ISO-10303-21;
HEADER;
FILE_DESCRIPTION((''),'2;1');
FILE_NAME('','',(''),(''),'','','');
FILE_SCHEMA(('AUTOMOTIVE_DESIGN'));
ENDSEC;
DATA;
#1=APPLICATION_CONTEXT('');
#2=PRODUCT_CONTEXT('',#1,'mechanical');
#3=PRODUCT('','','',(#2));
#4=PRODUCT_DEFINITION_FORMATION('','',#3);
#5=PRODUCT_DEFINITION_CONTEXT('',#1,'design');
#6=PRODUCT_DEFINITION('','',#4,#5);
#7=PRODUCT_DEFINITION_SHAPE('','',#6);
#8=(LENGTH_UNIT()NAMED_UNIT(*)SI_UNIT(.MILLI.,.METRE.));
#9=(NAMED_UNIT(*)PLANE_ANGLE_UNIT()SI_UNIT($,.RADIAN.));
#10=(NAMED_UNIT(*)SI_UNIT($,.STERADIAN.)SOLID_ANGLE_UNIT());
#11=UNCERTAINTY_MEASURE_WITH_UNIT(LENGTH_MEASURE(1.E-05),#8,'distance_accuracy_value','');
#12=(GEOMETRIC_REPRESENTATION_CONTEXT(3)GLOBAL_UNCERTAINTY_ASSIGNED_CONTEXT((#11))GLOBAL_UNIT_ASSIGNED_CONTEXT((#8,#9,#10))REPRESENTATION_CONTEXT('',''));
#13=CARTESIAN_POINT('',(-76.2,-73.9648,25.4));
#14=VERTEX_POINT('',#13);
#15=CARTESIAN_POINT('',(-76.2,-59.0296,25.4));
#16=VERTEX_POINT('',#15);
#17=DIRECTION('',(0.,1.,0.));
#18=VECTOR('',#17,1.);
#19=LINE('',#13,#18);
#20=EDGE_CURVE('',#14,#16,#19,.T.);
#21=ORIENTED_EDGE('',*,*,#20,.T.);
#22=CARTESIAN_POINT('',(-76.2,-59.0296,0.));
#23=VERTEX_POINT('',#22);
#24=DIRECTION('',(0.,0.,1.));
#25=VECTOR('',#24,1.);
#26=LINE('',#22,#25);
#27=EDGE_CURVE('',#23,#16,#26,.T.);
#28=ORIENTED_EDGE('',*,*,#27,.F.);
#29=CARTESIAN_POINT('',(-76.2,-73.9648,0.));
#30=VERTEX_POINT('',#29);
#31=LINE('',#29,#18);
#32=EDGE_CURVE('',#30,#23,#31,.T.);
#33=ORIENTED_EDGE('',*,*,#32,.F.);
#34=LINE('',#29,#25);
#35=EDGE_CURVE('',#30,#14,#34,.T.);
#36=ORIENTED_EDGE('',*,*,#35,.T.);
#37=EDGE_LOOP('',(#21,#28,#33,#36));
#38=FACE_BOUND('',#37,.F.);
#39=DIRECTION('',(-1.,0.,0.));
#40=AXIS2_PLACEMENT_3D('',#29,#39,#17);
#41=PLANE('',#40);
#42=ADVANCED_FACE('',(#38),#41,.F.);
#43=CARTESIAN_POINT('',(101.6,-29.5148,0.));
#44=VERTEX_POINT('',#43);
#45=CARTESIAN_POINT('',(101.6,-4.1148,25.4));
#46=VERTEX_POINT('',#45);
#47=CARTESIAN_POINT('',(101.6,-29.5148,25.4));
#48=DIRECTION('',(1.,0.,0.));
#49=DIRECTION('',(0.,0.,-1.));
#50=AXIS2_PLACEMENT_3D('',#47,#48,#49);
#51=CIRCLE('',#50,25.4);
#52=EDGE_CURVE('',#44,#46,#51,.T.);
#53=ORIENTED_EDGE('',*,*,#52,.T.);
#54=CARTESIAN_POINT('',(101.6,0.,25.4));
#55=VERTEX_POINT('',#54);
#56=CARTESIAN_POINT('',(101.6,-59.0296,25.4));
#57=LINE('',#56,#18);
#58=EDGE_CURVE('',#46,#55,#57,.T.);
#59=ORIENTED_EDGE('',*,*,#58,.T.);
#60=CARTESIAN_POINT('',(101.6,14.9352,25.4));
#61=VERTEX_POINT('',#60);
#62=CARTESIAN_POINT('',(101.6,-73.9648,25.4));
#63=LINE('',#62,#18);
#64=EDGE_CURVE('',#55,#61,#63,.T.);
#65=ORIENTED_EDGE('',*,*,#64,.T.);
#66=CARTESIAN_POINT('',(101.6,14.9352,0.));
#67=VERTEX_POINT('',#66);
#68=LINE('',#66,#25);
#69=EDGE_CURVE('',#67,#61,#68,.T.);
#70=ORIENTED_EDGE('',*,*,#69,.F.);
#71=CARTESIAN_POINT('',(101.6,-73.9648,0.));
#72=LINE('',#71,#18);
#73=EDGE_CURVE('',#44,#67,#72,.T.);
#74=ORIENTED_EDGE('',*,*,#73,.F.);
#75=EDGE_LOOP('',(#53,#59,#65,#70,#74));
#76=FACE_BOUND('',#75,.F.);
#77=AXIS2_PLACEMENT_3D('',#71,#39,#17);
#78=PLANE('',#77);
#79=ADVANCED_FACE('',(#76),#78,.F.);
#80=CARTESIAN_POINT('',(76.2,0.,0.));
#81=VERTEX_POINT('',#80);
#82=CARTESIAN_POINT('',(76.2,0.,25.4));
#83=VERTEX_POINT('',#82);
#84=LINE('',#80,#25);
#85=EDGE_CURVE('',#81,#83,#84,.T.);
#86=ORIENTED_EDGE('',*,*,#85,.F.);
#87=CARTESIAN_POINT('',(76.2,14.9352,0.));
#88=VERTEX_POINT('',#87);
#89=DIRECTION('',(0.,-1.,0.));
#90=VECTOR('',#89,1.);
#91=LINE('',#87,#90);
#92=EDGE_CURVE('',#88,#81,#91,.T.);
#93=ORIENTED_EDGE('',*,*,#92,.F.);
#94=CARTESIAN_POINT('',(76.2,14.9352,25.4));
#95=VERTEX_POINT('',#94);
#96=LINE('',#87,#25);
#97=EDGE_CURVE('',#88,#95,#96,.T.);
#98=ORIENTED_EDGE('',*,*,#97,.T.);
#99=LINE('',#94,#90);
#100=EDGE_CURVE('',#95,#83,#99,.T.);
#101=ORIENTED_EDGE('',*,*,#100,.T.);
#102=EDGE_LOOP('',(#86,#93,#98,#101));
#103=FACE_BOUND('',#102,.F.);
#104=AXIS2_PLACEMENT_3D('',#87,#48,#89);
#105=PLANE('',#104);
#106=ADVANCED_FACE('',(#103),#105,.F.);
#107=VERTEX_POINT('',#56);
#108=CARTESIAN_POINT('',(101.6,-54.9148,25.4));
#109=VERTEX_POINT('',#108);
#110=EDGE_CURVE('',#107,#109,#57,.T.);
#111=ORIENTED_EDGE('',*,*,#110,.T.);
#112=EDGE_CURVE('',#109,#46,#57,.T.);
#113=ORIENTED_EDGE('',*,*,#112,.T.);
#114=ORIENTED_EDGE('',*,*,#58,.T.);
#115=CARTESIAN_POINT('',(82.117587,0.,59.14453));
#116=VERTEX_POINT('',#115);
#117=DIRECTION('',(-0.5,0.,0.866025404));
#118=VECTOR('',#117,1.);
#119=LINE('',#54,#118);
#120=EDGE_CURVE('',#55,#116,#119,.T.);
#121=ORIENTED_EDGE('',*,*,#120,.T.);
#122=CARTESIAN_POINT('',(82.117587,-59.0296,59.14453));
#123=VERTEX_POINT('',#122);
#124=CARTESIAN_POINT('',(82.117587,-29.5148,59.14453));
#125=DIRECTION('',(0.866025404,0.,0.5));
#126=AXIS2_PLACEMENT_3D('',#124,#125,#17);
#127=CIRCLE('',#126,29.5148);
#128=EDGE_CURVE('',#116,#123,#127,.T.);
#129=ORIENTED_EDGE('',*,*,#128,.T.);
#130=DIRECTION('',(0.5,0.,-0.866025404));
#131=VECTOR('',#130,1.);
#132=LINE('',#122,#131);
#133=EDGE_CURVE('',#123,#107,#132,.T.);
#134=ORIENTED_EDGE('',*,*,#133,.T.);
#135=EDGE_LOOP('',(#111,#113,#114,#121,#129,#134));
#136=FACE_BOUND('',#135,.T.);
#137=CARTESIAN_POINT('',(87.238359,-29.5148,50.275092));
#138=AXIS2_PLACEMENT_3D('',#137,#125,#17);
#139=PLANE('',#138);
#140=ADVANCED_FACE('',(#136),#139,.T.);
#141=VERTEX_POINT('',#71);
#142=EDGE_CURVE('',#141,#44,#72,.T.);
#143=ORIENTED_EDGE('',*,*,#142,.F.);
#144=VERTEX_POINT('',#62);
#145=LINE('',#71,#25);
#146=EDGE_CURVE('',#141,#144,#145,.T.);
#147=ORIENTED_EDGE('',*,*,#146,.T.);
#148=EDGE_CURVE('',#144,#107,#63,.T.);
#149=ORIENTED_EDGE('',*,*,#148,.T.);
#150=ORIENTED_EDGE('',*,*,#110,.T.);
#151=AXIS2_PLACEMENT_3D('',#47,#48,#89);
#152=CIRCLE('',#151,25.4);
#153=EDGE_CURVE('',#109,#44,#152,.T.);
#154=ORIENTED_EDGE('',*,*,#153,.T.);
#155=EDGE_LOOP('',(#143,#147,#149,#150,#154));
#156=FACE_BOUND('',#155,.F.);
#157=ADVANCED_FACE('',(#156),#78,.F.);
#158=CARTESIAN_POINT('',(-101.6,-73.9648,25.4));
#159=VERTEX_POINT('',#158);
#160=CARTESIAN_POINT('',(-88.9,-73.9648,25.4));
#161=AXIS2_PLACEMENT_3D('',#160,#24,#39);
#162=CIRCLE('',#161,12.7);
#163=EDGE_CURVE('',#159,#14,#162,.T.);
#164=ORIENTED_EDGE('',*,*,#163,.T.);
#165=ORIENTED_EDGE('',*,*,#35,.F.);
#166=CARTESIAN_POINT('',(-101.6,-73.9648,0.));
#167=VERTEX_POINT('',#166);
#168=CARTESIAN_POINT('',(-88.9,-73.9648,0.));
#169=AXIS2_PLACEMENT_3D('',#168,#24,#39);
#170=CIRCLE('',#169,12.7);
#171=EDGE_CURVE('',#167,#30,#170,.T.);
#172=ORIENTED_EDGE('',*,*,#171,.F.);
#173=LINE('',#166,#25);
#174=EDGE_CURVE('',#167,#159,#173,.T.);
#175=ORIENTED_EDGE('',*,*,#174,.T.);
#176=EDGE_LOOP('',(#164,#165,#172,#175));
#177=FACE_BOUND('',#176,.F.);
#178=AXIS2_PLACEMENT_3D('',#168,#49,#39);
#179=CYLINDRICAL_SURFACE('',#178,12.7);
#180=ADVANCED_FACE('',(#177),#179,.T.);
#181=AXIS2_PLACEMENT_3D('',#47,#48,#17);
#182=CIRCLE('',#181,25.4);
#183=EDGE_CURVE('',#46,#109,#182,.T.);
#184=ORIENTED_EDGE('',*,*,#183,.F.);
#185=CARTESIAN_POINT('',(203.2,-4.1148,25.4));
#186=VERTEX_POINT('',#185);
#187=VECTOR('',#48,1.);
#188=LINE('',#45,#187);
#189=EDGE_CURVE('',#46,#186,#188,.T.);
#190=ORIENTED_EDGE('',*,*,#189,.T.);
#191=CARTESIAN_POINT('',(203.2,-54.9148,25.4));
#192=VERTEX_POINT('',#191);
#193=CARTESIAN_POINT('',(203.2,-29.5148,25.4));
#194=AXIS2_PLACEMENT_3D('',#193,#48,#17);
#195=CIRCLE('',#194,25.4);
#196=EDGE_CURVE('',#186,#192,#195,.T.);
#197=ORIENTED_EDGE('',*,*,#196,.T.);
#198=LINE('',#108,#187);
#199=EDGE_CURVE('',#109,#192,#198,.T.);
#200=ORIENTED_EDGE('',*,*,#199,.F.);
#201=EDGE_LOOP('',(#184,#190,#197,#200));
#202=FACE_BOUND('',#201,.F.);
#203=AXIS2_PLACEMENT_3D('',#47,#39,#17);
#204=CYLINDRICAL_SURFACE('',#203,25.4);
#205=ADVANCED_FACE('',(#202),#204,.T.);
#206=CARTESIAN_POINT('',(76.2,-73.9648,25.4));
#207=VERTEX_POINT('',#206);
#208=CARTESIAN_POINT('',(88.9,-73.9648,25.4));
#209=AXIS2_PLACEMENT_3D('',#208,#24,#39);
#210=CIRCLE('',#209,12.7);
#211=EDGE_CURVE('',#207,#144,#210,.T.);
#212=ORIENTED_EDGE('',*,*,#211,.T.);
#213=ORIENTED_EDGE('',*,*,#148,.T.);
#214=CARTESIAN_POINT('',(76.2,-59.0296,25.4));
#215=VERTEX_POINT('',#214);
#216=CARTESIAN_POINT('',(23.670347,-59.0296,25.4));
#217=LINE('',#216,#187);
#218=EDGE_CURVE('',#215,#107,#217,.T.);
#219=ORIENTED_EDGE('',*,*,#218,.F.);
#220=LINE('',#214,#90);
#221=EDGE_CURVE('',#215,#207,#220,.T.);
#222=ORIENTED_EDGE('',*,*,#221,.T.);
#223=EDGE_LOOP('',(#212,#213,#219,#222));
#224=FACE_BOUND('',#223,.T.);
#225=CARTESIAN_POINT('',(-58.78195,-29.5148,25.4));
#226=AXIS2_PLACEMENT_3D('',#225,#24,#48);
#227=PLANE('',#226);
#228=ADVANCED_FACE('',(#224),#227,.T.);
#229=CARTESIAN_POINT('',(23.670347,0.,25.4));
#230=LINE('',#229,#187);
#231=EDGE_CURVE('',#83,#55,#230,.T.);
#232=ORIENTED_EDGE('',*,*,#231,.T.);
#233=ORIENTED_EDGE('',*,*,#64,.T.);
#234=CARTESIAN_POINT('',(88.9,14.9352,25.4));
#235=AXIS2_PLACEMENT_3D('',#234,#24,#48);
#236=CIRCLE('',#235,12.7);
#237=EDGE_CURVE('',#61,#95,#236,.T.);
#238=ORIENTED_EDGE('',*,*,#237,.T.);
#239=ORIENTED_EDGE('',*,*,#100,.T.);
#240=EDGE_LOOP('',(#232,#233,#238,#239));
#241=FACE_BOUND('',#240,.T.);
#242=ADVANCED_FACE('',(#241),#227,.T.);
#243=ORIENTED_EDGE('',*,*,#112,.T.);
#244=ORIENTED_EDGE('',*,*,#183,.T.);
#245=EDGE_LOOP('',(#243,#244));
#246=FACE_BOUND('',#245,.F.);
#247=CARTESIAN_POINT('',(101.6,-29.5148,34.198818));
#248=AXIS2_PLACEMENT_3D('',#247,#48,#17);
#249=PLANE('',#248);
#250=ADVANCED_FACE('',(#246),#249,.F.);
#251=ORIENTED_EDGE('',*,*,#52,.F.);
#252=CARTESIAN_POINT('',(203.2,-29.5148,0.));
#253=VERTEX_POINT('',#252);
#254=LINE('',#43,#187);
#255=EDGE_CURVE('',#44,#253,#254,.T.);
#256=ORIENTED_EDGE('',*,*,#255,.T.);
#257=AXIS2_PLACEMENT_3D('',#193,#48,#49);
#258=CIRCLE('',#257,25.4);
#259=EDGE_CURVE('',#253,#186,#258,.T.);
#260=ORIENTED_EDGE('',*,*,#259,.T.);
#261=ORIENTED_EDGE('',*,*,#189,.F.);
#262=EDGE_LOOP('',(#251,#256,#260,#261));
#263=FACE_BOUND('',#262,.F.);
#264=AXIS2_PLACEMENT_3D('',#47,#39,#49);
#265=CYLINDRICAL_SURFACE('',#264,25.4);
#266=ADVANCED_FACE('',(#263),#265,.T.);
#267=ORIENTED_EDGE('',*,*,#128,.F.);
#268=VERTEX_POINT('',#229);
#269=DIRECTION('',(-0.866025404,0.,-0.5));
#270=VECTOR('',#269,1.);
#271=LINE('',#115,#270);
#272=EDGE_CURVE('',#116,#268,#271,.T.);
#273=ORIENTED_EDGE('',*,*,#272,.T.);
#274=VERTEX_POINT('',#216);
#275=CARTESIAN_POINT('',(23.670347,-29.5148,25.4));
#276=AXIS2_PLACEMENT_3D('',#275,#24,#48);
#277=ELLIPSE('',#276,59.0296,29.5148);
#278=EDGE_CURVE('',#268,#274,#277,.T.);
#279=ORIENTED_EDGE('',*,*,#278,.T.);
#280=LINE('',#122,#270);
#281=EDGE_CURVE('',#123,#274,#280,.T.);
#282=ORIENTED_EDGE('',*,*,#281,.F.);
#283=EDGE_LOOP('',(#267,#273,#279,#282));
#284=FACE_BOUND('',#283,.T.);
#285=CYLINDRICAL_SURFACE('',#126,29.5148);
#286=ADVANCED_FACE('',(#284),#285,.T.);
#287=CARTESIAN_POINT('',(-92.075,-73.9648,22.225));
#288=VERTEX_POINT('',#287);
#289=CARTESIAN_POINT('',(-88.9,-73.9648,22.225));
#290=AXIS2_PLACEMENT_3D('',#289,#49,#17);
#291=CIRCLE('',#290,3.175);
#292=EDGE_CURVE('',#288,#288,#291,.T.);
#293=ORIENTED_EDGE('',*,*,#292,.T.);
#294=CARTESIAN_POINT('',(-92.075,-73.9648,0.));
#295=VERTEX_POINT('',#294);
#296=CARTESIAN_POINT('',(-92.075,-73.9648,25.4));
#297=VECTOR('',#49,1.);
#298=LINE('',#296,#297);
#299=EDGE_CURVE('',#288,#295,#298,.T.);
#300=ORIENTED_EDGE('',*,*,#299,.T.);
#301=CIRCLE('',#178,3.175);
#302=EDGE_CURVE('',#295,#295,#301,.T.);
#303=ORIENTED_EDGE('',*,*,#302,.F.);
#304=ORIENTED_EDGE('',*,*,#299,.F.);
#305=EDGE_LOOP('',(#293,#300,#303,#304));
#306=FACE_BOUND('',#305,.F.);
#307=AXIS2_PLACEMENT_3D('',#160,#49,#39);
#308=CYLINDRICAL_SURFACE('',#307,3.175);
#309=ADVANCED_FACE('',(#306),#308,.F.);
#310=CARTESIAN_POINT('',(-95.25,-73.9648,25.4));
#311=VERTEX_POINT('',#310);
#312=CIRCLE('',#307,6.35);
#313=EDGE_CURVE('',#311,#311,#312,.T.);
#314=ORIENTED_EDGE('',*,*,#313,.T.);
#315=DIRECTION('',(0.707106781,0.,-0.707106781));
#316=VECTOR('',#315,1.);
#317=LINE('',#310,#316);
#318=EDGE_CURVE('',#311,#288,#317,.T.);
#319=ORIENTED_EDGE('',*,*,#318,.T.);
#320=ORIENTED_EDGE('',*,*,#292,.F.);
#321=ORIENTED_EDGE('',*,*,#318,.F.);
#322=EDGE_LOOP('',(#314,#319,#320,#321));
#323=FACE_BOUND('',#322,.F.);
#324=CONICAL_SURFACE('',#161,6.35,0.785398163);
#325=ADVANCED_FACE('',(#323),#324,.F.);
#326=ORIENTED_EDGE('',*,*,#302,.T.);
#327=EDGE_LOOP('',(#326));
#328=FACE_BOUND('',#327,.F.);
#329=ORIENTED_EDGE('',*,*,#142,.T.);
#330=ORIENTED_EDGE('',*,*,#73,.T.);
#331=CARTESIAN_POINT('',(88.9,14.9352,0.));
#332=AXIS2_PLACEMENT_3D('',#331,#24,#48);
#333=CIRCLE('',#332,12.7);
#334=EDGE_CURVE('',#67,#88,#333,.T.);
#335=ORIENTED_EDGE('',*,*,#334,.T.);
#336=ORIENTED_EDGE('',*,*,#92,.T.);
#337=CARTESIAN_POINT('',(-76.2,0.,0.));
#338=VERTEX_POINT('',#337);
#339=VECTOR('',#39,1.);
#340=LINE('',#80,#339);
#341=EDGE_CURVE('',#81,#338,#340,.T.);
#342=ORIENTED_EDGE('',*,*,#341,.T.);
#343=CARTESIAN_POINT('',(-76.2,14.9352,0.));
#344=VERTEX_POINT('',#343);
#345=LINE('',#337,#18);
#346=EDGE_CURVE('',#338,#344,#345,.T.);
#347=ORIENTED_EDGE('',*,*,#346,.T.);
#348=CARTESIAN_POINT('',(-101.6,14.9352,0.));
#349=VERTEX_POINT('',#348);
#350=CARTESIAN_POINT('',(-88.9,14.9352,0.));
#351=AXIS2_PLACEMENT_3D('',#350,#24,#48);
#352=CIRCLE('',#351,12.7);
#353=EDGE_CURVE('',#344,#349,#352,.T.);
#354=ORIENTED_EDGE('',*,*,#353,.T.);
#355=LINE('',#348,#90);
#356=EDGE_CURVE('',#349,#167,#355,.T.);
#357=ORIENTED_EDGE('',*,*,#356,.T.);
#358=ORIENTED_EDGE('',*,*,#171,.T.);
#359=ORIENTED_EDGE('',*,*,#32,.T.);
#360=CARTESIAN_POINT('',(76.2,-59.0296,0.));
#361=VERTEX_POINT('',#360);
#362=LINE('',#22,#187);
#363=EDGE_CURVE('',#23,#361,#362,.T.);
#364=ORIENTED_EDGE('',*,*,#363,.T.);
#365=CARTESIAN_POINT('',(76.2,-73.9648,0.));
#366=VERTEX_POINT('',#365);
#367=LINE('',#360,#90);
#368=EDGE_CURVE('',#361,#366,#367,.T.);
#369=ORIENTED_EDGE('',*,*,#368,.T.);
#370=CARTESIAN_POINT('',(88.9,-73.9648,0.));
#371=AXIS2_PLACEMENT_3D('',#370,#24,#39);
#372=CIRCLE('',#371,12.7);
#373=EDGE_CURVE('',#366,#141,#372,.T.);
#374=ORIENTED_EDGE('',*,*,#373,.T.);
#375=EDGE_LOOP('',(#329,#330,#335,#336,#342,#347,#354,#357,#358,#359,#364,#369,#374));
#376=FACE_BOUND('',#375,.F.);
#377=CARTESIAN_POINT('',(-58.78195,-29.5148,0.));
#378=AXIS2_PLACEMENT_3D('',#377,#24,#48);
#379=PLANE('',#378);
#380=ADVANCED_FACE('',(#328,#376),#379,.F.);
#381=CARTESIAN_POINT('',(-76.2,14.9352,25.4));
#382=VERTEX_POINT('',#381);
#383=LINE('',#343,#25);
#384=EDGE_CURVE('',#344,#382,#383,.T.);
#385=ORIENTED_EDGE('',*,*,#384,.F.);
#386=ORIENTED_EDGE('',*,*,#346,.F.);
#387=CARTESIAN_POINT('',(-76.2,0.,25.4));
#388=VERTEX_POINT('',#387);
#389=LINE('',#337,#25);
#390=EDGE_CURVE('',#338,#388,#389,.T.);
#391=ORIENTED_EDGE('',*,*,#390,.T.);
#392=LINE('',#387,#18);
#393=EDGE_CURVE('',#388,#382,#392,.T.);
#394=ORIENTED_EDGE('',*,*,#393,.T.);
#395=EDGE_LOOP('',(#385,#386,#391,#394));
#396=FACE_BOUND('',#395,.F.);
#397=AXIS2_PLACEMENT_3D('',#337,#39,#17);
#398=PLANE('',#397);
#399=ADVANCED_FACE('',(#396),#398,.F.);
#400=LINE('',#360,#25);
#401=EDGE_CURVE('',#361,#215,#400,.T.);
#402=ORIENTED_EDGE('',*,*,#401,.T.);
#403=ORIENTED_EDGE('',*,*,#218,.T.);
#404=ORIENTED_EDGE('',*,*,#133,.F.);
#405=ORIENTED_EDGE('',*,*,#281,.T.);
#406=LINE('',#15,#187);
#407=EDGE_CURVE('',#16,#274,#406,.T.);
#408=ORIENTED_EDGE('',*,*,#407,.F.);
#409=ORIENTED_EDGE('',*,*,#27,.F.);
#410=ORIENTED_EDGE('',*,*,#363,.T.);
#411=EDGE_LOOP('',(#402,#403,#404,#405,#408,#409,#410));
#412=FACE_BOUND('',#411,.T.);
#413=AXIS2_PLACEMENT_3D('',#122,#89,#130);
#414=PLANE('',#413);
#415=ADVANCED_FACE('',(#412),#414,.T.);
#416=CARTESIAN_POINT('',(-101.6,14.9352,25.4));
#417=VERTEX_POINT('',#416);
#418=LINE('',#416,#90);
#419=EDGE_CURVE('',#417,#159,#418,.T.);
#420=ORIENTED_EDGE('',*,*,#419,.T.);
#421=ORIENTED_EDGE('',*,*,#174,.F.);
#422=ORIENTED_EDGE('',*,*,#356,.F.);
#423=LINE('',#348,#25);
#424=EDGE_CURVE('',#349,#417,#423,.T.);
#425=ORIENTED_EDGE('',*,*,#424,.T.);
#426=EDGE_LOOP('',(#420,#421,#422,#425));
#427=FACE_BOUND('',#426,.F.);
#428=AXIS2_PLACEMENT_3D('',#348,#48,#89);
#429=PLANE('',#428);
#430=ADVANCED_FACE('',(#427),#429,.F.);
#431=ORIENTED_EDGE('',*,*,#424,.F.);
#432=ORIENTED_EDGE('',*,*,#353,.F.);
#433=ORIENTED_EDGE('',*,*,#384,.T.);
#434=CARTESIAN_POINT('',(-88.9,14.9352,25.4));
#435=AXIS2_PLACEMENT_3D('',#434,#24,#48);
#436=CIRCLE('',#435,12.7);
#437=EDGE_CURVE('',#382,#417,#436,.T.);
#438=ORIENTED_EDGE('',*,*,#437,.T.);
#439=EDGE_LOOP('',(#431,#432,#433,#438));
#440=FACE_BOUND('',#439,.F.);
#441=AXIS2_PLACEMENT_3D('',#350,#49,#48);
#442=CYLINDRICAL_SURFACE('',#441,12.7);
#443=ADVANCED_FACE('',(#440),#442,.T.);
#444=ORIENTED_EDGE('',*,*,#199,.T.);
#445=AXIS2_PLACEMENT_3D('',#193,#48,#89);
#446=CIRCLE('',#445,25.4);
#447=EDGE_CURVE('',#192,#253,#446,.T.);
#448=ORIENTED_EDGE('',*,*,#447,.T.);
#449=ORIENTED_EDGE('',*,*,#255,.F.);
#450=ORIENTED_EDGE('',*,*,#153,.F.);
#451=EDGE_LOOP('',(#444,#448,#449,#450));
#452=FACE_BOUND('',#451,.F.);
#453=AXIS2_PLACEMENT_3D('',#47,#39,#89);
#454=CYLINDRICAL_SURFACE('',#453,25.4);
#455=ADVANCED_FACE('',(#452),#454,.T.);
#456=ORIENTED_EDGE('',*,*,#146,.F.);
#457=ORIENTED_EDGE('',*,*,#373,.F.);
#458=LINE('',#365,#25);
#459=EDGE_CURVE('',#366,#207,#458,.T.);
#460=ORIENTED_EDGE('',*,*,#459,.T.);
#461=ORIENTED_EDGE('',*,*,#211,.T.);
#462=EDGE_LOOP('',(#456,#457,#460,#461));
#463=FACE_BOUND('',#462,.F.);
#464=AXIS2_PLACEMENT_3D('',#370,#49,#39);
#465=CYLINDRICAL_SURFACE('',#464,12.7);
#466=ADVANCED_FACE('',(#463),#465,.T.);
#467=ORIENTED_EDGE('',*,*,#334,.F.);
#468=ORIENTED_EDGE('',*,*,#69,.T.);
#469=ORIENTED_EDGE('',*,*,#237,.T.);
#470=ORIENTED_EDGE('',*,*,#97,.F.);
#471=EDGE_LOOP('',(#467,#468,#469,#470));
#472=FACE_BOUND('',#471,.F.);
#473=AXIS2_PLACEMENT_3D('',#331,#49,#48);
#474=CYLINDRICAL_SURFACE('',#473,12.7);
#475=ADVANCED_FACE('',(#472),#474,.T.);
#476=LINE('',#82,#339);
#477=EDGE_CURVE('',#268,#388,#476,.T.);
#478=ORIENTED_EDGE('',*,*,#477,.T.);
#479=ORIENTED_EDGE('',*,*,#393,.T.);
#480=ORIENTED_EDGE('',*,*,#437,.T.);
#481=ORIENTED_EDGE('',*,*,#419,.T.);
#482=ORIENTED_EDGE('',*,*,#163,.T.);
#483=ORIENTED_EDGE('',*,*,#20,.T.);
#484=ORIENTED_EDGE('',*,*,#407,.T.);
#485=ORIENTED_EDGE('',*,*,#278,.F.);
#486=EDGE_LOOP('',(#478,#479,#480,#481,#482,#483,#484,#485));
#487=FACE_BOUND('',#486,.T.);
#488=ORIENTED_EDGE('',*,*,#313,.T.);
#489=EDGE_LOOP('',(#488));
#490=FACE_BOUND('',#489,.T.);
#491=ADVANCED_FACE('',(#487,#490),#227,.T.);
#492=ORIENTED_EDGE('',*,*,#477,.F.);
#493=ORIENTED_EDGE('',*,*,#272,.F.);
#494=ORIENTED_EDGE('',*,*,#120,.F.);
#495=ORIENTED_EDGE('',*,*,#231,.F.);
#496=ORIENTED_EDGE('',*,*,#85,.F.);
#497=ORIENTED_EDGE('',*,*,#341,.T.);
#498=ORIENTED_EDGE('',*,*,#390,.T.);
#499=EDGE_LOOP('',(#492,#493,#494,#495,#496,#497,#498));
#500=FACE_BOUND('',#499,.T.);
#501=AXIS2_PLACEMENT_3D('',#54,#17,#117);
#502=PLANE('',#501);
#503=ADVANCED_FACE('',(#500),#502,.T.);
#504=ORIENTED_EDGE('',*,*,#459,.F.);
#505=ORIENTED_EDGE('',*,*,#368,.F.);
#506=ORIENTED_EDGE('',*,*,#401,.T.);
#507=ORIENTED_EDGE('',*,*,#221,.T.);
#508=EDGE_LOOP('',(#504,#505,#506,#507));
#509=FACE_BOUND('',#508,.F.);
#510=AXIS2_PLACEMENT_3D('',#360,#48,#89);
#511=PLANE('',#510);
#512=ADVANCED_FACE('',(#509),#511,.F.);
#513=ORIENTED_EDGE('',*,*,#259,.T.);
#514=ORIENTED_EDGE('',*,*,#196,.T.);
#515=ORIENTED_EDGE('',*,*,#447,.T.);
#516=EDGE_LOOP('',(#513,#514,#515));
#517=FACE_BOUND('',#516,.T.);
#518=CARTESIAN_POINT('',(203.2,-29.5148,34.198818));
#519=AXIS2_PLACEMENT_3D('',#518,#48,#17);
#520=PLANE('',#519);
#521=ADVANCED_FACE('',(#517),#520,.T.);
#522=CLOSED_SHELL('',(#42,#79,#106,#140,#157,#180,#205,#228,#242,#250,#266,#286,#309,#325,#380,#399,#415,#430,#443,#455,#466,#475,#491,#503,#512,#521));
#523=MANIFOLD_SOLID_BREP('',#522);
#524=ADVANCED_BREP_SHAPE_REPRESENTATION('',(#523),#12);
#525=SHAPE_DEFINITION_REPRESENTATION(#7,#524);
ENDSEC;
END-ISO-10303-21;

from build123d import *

# Parameters (mm, degrees)
F1_DEPTH        = 25.4
F6_DEPTH        = 101.6
F10_D           = 6.35
F10_CSINK_D     = 12.7
F10_CSINK_ANGLE = 90


with BuildPart() as f1:
    # F0 (on Top) → F1 (new body)
    with BuildSketch(Plane.XY):
        with BuildLine():
            Line((0, -59.0296), (0, 0))
            Line((0, 0), (-76.2, 0))
            Line((-76.2, 0), (-76.2, 14.9352))
            ThreePointArc((-76.2, 14.9352), (-88.9, 27.6352), (-101.6, 14.9352))
            Line((-101.6, 14.9352), (-101.6, -73.9648))
            ThreePointArc((-101.6, -73.9648), (-88.9, -86.6648), (-76.2, -73.9648))
            Line((-76.2, -73.9648), (-76.2, -59.0296))
            Line((-76.2, -59.0296), (0, -59.0296))
        make_face()
        with BuildLine():
            Line((76.2, 0), (0, 0))
            Line((0, 0), (0, -59.0296))
            Line((0, -59.0296), (76.2, -59.0296))
            Line((76.2, -59.0296), (76.2, -73.9648))
            ThreePointArc((76.2, -73.9648), (88.9, -86.6648), (101.6, -73.9648))
            Line((101.6, -73.9648), (101.6, 14.9352))
            ThreePointArc((101.6, 14.9352), (88.9, 27.6352), (76.2, 14.9352))
            Line((76.2, 14.9352), (76.2, 0))
        make_face()
    extrude(amount=F1_DEPTH)

    # F3 (on face) → F4 (join, up to the next surface of F1)
    with BuildSketch(Plane(origin=(87.1985226281, 0, 50.3440905122), x_dir=(0, 1, 0), z_dir=(0.8660254038, 0, 0.5))):
        with BuildLine():
            Line((-59.0296, 10.1618718698), (-59.0296, -28.8029547439))
            Line((-59.0296, -28.8029547439), (0, -28.8029547439))
            Line((0, -28.8029547439), (0, 10.1618718698))
            ThreePointArc((0, 10.1618718698), (-29.5148, 39.6766718698), (-59.0296, 10.1618718698))
        make_face()
    extrude(until=Until.NEXT, dir=(-0.8660254038, 0, -0.5))

    # F5 (on face) → F6 (join)
    with BuildSketch(Plane.YZ.offset(101.6)):
        with BuildLine():
            Line((-54.9148, 25.4), (-4.1148, 25.4))
            ThreePointArc((-4.1148, 25.4), (-29.5148, 50.8), (-54.9148, 25.4))
        make_face()
        with BuildLine():
            ThreePointArc((-29.5148, 0), (-11.5542877579, 7.4394877579), (-4.1148, 25.4))
            Line((-4.1148, 25.4), (-54.9148, 25.4))
            ThreePointArc((-54.9148, 25.4), (-47.4753122421, 7.4394877579), (-29.5148, 0))
        make_face()
    extrude(amount=F6_DEPTH)

    # F10 (through all)
    with Locations(Plane.XY.offset(25.4)):
        with Locations((-88.9, -73.9648)):
            CounterSinkHole(F10_D / 2, F10_CSINK_D / 2, counter_sink_angle=F10_CSINK_ANGLE)


solid = f1.part
